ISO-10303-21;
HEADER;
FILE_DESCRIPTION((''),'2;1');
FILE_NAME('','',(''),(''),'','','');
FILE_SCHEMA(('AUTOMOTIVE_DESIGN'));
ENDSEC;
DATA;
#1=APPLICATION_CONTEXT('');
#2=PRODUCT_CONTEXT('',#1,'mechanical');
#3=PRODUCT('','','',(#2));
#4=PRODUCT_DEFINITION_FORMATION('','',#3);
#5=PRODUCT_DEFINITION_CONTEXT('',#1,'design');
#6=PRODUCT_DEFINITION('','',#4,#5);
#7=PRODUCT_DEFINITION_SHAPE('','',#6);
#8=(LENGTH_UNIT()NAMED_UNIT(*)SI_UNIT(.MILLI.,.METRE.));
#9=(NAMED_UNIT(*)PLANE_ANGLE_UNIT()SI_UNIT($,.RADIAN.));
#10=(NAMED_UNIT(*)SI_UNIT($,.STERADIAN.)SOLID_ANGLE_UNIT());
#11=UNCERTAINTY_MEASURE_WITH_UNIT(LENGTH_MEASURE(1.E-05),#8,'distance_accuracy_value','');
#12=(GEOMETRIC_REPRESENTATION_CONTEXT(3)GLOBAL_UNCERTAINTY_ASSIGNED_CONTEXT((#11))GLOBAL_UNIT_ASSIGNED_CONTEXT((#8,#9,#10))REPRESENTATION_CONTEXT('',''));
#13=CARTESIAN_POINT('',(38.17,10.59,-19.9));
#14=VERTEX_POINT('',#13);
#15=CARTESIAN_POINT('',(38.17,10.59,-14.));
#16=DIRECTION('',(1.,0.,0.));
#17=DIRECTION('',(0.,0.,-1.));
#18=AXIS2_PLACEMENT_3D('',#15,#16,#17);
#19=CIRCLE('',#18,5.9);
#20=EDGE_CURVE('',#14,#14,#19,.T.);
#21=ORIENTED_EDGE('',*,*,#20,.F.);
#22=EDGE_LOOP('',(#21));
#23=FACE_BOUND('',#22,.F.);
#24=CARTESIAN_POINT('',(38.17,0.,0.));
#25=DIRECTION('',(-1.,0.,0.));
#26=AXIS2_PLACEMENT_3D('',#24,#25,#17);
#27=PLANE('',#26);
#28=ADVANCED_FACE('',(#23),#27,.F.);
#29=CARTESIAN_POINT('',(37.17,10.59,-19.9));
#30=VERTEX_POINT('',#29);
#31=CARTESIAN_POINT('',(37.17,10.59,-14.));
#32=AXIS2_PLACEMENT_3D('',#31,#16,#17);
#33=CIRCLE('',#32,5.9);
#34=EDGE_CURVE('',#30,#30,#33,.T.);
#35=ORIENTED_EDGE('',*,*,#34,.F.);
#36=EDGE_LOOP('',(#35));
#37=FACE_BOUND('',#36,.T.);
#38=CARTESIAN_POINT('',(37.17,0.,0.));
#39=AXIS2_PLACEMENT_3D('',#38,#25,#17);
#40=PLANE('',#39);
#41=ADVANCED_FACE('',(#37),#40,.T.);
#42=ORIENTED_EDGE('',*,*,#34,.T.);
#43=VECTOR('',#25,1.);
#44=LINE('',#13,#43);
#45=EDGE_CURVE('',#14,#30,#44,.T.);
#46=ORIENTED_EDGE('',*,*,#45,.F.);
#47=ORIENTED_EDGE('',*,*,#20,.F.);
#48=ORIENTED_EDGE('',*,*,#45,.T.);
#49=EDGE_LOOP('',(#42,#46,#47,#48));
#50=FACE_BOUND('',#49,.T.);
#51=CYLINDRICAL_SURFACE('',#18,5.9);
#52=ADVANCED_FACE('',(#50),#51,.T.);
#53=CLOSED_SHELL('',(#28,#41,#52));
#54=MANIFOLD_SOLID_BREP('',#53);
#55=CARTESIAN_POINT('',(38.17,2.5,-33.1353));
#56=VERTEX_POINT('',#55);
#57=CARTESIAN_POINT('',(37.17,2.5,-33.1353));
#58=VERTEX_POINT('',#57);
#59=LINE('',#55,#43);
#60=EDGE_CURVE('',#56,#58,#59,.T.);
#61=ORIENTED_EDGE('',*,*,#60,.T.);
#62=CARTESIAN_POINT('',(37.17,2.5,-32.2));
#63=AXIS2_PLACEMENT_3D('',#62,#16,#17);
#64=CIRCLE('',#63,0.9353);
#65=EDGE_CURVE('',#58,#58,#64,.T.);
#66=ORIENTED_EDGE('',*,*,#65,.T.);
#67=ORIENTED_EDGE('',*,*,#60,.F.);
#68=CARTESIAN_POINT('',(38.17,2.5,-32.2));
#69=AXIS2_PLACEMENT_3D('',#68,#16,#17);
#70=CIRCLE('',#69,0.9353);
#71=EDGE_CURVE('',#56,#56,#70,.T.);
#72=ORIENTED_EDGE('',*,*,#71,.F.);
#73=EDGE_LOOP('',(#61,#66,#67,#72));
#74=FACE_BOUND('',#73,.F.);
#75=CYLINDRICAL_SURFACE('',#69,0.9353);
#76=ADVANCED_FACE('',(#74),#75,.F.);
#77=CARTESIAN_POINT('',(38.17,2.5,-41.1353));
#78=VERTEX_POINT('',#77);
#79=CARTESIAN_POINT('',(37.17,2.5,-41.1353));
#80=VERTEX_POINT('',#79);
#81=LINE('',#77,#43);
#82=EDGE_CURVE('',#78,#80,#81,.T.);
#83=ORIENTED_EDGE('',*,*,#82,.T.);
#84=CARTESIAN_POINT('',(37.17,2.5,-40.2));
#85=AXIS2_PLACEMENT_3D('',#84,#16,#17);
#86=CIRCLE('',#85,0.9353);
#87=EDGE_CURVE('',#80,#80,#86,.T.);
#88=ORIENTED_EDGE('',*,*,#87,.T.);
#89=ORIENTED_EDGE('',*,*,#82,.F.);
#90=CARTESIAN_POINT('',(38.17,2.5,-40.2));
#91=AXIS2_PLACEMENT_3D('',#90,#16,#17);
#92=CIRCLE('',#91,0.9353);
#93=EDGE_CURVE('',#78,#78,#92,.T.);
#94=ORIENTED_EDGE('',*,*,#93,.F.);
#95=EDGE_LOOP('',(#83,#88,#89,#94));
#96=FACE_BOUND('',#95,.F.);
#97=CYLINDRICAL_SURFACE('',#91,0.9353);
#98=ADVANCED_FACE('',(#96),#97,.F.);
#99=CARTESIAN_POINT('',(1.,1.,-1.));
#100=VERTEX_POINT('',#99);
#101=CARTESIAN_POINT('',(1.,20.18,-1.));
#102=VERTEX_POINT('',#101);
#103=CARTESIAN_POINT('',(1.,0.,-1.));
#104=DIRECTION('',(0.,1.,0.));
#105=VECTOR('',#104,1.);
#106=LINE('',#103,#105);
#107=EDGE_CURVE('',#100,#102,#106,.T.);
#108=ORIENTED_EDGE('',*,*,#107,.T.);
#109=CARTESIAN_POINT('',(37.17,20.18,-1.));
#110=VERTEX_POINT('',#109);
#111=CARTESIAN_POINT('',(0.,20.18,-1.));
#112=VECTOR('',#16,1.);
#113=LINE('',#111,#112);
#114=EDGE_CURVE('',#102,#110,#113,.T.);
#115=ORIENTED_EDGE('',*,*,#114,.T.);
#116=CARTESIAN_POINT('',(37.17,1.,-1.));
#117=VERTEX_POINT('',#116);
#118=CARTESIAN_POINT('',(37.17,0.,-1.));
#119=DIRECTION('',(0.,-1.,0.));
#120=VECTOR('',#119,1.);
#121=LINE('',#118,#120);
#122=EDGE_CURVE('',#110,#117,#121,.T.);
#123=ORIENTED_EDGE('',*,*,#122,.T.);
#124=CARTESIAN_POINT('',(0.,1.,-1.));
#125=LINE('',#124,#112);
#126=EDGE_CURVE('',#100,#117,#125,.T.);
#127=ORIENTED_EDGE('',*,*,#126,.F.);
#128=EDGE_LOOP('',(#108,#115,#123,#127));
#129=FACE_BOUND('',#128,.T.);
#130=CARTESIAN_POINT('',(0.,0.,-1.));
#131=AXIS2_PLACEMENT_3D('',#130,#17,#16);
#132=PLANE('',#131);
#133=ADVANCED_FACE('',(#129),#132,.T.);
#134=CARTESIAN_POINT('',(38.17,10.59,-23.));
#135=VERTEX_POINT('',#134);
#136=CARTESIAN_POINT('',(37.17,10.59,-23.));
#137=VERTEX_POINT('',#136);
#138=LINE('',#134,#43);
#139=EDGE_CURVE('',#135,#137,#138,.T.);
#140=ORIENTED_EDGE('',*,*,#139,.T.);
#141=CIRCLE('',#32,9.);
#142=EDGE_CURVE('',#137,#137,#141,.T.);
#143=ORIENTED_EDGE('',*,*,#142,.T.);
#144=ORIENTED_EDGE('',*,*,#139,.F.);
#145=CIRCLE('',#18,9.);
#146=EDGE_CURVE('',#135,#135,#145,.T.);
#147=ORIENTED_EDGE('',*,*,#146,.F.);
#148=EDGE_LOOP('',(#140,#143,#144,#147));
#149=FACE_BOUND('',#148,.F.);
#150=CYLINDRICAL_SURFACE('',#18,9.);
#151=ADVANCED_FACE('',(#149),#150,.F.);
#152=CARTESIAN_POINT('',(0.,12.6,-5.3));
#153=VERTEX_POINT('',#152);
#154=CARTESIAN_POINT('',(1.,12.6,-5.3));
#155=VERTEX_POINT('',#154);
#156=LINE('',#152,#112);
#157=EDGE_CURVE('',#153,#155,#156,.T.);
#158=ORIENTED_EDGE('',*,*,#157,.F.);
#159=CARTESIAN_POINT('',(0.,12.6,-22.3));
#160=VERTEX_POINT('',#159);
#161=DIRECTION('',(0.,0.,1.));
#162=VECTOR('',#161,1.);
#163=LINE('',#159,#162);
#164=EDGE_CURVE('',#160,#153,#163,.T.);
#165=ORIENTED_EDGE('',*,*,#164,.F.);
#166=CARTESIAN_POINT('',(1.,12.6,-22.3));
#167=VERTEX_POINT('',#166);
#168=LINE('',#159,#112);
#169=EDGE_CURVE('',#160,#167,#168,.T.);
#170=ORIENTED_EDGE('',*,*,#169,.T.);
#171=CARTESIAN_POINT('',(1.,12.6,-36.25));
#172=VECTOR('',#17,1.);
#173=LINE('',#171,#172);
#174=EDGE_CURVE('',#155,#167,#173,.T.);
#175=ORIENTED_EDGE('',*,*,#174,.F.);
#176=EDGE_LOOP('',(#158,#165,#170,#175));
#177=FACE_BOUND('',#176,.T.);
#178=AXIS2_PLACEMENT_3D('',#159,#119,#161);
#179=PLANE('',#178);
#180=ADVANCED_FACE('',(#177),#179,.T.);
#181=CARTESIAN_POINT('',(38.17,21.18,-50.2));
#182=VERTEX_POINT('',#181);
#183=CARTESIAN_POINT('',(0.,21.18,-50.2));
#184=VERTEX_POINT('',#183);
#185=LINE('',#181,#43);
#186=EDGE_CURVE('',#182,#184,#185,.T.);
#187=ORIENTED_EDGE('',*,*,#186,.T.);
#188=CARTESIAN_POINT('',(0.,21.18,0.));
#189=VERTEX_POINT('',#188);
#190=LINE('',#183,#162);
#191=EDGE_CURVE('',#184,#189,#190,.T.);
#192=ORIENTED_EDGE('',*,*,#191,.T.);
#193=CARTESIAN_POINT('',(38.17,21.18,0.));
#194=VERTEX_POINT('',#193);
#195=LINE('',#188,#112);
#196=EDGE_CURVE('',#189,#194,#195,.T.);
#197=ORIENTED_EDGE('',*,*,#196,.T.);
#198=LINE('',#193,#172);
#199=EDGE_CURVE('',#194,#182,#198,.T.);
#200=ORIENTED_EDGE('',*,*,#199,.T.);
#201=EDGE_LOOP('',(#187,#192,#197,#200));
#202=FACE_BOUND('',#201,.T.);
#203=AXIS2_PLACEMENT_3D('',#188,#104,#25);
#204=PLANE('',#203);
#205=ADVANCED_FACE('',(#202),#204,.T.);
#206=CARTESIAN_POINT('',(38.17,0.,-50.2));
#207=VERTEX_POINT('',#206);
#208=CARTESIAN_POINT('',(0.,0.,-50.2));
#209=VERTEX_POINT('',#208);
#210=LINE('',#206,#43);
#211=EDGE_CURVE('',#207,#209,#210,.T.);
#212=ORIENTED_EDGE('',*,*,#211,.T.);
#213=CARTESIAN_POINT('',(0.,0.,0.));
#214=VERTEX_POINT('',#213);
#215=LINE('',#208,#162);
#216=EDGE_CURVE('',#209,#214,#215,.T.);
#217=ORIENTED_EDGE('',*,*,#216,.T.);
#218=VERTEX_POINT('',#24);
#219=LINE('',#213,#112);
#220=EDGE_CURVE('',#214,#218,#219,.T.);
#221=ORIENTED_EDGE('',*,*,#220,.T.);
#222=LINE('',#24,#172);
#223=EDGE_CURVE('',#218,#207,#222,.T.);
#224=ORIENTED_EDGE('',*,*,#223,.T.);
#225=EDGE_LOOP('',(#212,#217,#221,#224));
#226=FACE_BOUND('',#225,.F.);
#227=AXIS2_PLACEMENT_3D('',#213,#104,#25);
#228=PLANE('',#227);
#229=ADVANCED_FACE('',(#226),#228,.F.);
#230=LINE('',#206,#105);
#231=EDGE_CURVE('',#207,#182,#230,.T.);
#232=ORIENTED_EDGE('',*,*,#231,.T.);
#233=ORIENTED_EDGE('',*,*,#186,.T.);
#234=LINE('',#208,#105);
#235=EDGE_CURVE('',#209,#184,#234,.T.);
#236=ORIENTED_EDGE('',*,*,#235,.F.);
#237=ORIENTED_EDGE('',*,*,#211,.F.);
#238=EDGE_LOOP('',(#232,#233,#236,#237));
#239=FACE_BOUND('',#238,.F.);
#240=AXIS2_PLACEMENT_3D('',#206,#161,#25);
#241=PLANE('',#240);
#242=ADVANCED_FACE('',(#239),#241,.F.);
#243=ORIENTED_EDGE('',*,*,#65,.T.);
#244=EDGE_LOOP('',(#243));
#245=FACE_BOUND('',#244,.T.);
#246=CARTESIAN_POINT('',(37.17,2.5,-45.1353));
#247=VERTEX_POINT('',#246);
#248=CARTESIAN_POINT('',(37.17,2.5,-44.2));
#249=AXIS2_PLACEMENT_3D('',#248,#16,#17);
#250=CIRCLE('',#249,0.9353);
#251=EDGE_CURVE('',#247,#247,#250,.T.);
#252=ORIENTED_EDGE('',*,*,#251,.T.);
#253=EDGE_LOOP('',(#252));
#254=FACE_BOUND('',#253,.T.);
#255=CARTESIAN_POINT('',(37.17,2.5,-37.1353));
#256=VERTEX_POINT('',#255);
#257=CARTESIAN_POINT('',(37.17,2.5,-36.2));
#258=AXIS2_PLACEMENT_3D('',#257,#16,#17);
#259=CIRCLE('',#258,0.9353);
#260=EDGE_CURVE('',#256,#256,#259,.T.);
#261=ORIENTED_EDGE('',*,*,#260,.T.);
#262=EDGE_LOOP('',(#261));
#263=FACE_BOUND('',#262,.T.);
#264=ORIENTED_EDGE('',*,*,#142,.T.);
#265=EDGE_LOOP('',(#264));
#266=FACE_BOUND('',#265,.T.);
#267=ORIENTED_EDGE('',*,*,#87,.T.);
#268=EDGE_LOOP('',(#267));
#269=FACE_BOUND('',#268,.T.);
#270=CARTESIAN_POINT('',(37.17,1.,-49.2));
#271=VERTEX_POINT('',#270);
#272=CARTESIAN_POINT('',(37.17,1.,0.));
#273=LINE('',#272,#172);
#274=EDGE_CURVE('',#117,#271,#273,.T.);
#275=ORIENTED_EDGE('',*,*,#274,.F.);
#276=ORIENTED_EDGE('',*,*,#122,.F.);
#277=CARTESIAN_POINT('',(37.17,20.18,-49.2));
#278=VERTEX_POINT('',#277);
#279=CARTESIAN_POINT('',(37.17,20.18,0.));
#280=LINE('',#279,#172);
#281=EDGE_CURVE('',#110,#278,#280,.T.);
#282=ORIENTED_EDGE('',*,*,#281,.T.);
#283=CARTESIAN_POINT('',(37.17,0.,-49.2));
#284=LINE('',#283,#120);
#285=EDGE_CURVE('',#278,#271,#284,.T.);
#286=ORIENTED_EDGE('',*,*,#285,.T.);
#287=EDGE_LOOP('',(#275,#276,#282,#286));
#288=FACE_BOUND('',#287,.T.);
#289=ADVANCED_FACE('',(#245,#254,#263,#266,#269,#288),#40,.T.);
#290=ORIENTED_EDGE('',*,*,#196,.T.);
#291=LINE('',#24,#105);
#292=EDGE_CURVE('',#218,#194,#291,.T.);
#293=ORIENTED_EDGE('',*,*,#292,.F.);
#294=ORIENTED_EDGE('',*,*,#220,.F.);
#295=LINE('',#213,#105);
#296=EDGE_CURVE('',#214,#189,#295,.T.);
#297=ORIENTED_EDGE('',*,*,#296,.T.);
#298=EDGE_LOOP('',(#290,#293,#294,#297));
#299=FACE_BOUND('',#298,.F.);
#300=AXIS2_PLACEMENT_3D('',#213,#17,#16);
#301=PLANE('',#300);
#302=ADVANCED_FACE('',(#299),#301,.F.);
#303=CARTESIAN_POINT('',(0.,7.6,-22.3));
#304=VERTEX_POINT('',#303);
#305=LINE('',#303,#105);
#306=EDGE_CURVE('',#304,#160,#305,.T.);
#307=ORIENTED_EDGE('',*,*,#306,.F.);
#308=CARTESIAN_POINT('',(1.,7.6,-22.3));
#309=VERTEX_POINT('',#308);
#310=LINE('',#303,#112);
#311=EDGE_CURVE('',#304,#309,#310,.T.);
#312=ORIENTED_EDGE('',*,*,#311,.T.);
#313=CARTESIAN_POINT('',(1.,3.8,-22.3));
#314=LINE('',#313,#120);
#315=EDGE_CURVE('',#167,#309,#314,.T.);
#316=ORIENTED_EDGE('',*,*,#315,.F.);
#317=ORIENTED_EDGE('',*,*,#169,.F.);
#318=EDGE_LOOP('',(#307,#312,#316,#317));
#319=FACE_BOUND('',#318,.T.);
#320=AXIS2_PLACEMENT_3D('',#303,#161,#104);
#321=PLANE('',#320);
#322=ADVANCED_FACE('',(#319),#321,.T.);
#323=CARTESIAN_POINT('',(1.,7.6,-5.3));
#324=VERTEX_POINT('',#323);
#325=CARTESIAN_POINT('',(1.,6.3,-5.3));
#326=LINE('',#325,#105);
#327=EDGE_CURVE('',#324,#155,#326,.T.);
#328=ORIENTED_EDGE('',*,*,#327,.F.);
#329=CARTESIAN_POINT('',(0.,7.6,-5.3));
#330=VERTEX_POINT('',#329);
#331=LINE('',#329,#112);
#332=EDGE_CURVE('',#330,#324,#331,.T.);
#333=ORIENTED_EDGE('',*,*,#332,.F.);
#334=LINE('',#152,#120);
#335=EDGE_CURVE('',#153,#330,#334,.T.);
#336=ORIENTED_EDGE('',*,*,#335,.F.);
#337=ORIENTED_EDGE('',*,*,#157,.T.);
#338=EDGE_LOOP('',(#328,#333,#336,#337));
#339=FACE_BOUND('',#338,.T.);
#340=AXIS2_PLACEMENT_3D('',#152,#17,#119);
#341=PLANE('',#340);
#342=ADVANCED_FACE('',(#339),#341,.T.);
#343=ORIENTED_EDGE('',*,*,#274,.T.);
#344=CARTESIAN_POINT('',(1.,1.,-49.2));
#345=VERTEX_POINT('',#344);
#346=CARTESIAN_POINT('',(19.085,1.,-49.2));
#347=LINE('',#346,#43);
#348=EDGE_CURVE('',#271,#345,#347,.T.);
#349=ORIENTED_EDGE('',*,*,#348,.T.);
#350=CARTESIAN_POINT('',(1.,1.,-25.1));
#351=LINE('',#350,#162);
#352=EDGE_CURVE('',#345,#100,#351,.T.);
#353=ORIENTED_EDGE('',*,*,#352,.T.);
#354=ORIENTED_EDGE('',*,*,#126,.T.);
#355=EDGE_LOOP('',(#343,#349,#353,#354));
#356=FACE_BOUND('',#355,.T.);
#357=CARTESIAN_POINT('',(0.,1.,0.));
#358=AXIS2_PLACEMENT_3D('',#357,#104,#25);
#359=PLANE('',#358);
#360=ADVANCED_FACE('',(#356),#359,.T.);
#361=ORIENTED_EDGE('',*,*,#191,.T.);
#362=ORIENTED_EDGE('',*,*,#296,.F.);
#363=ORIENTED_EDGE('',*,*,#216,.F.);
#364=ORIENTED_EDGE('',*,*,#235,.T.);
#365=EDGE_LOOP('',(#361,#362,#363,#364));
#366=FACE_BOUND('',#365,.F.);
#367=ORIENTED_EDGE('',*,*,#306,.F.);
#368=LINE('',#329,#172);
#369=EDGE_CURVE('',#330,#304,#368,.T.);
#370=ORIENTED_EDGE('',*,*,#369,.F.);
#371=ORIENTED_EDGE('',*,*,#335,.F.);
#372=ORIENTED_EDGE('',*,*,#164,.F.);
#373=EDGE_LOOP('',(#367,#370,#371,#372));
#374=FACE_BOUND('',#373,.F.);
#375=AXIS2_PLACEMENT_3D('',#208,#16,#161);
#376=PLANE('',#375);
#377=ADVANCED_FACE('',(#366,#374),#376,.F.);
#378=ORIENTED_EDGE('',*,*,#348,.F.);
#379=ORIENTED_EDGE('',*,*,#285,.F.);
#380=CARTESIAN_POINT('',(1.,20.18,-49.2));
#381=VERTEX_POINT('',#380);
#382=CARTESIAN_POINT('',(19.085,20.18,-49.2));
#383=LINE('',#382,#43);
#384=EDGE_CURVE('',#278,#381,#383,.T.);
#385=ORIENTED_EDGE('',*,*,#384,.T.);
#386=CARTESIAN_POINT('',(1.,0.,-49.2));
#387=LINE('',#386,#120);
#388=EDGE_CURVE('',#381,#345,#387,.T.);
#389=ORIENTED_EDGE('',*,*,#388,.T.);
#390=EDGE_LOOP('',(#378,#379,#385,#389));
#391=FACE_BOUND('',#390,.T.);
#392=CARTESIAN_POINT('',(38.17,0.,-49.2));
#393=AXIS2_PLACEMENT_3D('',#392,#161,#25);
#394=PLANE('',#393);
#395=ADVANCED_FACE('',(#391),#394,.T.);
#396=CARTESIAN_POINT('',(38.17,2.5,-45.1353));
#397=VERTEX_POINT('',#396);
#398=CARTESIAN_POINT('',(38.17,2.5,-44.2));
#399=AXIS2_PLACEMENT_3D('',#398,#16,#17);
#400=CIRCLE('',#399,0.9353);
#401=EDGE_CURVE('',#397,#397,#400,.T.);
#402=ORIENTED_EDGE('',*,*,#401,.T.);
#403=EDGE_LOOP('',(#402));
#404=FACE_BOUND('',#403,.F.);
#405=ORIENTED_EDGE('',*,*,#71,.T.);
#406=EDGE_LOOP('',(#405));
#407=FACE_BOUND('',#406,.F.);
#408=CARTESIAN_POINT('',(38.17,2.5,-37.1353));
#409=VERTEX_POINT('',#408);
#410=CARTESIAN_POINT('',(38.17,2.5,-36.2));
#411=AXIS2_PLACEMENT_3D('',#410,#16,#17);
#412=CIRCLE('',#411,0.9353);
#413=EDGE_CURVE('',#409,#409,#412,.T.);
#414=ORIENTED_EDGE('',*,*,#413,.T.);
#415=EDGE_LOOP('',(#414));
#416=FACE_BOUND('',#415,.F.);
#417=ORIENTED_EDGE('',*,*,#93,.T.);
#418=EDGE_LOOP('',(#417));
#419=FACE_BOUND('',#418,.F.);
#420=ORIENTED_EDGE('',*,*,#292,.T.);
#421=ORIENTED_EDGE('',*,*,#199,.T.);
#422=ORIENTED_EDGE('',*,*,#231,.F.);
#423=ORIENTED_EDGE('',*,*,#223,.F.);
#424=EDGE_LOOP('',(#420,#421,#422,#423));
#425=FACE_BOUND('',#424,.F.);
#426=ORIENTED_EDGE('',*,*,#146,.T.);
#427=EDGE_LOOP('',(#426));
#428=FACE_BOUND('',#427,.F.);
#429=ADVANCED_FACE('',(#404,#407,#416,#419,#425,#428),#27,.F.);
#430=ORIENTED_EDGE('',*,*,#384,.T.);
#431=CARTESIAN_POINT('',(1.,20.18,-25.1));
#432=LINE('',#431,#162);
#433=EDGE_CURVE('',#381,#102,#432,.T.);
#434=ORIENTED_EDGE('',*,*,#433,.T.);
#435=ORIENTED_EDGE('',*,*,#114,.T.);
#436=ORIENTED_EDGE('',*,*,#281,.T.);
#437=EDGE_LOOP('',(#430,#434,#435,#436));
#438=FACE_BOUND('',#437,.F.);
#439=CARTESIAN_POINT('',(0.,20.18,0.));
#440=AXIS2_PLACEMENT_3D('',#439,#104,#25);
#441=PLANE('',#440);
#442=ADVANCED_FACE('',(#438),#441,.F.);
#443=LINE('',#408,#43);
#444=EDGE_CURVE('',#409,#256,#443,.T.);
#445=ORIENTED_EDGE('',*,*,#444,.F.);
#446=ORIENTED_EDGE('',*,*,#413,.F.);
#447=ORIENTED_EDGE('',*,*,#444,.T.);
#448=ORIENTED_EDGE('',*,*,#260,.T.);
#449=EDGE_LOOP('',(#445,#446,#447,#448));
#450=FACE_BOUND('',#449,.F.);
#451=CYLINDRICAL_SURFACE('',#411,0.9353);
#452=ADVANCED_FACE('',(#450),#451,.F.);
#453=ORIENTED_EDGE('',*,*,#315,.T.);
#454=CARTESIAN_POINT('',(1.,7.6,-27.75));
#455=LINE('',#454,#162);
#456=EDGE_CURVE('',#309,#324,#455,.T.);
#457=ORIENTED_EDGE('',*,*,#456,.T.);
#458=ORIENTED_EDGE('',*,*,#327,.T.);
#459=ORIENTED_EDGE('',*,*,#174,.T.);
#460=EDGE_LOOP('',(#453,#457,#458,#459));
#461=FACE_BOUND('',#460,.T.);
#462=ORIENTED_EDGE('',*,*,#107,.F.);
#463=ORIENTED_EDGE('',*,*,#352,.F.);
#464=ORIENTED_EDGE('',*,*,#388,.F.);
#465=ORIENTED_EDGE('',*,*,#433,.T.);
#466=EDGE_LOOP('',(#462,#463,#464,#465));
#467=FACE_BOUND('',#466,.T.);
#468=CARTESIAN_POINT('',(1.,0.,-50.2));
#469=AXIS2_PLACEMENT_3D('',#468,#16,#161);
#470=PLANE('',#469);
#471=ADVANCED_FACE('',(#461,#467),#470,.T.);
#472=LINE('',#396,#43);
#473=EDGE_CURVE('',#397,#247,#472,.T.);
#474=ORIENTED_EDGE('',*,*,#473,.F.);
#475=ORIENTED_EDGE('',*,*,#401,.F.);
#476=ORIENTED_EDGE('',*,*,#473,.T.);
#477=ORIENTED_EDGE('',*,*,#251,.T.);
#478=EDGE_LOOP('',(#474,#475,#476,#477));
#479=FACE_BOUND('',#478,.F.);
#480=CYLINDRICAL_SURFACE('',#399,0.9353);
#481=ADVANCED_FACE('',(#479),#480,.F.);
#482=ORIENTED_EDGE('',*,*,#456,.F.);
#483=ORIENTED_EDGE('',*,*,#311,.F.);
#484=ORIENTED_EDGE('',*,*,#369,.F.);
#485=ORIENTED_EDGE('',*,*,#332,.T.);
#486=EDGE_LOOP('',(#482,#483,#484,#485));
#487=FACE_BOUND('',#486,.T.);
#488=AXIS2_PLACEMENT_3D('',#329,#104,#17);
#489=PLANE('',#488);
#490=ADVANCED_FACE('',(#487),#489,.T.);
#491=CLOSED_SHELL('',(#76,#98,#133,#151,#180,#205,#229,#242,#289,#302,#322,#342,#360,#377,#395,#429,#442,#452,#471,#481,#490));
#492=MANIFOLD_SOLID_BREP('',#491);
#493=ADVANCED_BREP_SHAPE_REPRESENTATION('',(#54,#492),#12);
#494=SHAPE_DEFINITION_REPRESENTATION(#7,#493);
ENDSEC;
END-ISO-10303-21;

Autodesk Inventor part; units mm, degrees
ref_plane "YZ Plane" through (0, 0, 0) normal (1, 0, 0) x (0, 1, 0)
ref_plane "XZ Plane" through (0, 0, 0) normal (0, 1, 0) x (-1, 0, 0)
ref_plane "XY Plane" through (0, 0, 0) normal (0, 0, 1) x (1, 0, 0)
sketch "Sketch1" plane through (0, 0, 0) normal (0, 1, 0) x (-1, 0, 0)
  line L0 (0, 0) -> (-38.17, 0)
  line L1 (-38.17, 0) -> (-38.17, -50.2)
  line L2 (-38.17, -50.2) -> (0, -50.2)
  line L3 (0, -50.2) -> (0, 0)
  dimension "d0" = 38.17
  dimension "d1" = 50.2
extrude "Extrusion1" add sketch "Sketch1" along normal blind 21.18
shell "Shell1" thickness 1 removed faces 0
sketch "Sketch2" plane through (38.17, 0, 0) normal (1, 0, 0) x (0, 0, -1)
  circle A0 centre (14, 10.59) radius 9
  line L0 (0, 0) -> (0, 21.18) projected
  circle A1 centre (14, 10.59) radius 5.9
  circle A2 centre (32.2, 2.5) radius 0.9353
  circle A3 centre (36.2, 2.5) radius 0.9353
  circle A4 centre (40.2, 2.5) radius 0.9353
  circle A5 centre (44.2, 2.5) radius 0.9353
  line L1 (50.2, 0) -> (50.2, 21.18) projected
  line L2 (0, 0) -> (50.2, 0) projected
  point P0 (0, 10.59)
  dimension "d4" = 18
  dimension "d5" = 14
  dimension "d6" = 11.8
  dimension "d9" = 6
  dimension "d10" = 2.5
  dimension "d11" = 4
  dimension "d12" = 4
  dimension "d13" = 4
extrude "Extrusion2" cut sketch "Sketch2" against normal blind 4
sketch "Sketch3" plane through (0, 0, -50.2) normal (-1, 0, 0) x (0, 0, 1)
  line L0 (27.9, 12.6) -> (44.9, 12.6)
  line L1 (44.9, 12.6) -> (44.9, 7.6)
  line L2 (44.9, 7.6) -> (27.9, 7.6)
  line L3 (27.9, 7.6) -> (27.9, 12.6)
  line L4 (0, 0) -> (50.2, 0) projected
  dimension "d15" = 5
  dimension "d16" = 17
  dimension "d17" = 7.6
  dimension "d18" = 5.3
extrude "Extrusion3" cut sketch "Sketch3" against normal blind 4
equation "\"d7\" = d13"
equation "\"d19\" = d13"
properties part number "pms5003"
